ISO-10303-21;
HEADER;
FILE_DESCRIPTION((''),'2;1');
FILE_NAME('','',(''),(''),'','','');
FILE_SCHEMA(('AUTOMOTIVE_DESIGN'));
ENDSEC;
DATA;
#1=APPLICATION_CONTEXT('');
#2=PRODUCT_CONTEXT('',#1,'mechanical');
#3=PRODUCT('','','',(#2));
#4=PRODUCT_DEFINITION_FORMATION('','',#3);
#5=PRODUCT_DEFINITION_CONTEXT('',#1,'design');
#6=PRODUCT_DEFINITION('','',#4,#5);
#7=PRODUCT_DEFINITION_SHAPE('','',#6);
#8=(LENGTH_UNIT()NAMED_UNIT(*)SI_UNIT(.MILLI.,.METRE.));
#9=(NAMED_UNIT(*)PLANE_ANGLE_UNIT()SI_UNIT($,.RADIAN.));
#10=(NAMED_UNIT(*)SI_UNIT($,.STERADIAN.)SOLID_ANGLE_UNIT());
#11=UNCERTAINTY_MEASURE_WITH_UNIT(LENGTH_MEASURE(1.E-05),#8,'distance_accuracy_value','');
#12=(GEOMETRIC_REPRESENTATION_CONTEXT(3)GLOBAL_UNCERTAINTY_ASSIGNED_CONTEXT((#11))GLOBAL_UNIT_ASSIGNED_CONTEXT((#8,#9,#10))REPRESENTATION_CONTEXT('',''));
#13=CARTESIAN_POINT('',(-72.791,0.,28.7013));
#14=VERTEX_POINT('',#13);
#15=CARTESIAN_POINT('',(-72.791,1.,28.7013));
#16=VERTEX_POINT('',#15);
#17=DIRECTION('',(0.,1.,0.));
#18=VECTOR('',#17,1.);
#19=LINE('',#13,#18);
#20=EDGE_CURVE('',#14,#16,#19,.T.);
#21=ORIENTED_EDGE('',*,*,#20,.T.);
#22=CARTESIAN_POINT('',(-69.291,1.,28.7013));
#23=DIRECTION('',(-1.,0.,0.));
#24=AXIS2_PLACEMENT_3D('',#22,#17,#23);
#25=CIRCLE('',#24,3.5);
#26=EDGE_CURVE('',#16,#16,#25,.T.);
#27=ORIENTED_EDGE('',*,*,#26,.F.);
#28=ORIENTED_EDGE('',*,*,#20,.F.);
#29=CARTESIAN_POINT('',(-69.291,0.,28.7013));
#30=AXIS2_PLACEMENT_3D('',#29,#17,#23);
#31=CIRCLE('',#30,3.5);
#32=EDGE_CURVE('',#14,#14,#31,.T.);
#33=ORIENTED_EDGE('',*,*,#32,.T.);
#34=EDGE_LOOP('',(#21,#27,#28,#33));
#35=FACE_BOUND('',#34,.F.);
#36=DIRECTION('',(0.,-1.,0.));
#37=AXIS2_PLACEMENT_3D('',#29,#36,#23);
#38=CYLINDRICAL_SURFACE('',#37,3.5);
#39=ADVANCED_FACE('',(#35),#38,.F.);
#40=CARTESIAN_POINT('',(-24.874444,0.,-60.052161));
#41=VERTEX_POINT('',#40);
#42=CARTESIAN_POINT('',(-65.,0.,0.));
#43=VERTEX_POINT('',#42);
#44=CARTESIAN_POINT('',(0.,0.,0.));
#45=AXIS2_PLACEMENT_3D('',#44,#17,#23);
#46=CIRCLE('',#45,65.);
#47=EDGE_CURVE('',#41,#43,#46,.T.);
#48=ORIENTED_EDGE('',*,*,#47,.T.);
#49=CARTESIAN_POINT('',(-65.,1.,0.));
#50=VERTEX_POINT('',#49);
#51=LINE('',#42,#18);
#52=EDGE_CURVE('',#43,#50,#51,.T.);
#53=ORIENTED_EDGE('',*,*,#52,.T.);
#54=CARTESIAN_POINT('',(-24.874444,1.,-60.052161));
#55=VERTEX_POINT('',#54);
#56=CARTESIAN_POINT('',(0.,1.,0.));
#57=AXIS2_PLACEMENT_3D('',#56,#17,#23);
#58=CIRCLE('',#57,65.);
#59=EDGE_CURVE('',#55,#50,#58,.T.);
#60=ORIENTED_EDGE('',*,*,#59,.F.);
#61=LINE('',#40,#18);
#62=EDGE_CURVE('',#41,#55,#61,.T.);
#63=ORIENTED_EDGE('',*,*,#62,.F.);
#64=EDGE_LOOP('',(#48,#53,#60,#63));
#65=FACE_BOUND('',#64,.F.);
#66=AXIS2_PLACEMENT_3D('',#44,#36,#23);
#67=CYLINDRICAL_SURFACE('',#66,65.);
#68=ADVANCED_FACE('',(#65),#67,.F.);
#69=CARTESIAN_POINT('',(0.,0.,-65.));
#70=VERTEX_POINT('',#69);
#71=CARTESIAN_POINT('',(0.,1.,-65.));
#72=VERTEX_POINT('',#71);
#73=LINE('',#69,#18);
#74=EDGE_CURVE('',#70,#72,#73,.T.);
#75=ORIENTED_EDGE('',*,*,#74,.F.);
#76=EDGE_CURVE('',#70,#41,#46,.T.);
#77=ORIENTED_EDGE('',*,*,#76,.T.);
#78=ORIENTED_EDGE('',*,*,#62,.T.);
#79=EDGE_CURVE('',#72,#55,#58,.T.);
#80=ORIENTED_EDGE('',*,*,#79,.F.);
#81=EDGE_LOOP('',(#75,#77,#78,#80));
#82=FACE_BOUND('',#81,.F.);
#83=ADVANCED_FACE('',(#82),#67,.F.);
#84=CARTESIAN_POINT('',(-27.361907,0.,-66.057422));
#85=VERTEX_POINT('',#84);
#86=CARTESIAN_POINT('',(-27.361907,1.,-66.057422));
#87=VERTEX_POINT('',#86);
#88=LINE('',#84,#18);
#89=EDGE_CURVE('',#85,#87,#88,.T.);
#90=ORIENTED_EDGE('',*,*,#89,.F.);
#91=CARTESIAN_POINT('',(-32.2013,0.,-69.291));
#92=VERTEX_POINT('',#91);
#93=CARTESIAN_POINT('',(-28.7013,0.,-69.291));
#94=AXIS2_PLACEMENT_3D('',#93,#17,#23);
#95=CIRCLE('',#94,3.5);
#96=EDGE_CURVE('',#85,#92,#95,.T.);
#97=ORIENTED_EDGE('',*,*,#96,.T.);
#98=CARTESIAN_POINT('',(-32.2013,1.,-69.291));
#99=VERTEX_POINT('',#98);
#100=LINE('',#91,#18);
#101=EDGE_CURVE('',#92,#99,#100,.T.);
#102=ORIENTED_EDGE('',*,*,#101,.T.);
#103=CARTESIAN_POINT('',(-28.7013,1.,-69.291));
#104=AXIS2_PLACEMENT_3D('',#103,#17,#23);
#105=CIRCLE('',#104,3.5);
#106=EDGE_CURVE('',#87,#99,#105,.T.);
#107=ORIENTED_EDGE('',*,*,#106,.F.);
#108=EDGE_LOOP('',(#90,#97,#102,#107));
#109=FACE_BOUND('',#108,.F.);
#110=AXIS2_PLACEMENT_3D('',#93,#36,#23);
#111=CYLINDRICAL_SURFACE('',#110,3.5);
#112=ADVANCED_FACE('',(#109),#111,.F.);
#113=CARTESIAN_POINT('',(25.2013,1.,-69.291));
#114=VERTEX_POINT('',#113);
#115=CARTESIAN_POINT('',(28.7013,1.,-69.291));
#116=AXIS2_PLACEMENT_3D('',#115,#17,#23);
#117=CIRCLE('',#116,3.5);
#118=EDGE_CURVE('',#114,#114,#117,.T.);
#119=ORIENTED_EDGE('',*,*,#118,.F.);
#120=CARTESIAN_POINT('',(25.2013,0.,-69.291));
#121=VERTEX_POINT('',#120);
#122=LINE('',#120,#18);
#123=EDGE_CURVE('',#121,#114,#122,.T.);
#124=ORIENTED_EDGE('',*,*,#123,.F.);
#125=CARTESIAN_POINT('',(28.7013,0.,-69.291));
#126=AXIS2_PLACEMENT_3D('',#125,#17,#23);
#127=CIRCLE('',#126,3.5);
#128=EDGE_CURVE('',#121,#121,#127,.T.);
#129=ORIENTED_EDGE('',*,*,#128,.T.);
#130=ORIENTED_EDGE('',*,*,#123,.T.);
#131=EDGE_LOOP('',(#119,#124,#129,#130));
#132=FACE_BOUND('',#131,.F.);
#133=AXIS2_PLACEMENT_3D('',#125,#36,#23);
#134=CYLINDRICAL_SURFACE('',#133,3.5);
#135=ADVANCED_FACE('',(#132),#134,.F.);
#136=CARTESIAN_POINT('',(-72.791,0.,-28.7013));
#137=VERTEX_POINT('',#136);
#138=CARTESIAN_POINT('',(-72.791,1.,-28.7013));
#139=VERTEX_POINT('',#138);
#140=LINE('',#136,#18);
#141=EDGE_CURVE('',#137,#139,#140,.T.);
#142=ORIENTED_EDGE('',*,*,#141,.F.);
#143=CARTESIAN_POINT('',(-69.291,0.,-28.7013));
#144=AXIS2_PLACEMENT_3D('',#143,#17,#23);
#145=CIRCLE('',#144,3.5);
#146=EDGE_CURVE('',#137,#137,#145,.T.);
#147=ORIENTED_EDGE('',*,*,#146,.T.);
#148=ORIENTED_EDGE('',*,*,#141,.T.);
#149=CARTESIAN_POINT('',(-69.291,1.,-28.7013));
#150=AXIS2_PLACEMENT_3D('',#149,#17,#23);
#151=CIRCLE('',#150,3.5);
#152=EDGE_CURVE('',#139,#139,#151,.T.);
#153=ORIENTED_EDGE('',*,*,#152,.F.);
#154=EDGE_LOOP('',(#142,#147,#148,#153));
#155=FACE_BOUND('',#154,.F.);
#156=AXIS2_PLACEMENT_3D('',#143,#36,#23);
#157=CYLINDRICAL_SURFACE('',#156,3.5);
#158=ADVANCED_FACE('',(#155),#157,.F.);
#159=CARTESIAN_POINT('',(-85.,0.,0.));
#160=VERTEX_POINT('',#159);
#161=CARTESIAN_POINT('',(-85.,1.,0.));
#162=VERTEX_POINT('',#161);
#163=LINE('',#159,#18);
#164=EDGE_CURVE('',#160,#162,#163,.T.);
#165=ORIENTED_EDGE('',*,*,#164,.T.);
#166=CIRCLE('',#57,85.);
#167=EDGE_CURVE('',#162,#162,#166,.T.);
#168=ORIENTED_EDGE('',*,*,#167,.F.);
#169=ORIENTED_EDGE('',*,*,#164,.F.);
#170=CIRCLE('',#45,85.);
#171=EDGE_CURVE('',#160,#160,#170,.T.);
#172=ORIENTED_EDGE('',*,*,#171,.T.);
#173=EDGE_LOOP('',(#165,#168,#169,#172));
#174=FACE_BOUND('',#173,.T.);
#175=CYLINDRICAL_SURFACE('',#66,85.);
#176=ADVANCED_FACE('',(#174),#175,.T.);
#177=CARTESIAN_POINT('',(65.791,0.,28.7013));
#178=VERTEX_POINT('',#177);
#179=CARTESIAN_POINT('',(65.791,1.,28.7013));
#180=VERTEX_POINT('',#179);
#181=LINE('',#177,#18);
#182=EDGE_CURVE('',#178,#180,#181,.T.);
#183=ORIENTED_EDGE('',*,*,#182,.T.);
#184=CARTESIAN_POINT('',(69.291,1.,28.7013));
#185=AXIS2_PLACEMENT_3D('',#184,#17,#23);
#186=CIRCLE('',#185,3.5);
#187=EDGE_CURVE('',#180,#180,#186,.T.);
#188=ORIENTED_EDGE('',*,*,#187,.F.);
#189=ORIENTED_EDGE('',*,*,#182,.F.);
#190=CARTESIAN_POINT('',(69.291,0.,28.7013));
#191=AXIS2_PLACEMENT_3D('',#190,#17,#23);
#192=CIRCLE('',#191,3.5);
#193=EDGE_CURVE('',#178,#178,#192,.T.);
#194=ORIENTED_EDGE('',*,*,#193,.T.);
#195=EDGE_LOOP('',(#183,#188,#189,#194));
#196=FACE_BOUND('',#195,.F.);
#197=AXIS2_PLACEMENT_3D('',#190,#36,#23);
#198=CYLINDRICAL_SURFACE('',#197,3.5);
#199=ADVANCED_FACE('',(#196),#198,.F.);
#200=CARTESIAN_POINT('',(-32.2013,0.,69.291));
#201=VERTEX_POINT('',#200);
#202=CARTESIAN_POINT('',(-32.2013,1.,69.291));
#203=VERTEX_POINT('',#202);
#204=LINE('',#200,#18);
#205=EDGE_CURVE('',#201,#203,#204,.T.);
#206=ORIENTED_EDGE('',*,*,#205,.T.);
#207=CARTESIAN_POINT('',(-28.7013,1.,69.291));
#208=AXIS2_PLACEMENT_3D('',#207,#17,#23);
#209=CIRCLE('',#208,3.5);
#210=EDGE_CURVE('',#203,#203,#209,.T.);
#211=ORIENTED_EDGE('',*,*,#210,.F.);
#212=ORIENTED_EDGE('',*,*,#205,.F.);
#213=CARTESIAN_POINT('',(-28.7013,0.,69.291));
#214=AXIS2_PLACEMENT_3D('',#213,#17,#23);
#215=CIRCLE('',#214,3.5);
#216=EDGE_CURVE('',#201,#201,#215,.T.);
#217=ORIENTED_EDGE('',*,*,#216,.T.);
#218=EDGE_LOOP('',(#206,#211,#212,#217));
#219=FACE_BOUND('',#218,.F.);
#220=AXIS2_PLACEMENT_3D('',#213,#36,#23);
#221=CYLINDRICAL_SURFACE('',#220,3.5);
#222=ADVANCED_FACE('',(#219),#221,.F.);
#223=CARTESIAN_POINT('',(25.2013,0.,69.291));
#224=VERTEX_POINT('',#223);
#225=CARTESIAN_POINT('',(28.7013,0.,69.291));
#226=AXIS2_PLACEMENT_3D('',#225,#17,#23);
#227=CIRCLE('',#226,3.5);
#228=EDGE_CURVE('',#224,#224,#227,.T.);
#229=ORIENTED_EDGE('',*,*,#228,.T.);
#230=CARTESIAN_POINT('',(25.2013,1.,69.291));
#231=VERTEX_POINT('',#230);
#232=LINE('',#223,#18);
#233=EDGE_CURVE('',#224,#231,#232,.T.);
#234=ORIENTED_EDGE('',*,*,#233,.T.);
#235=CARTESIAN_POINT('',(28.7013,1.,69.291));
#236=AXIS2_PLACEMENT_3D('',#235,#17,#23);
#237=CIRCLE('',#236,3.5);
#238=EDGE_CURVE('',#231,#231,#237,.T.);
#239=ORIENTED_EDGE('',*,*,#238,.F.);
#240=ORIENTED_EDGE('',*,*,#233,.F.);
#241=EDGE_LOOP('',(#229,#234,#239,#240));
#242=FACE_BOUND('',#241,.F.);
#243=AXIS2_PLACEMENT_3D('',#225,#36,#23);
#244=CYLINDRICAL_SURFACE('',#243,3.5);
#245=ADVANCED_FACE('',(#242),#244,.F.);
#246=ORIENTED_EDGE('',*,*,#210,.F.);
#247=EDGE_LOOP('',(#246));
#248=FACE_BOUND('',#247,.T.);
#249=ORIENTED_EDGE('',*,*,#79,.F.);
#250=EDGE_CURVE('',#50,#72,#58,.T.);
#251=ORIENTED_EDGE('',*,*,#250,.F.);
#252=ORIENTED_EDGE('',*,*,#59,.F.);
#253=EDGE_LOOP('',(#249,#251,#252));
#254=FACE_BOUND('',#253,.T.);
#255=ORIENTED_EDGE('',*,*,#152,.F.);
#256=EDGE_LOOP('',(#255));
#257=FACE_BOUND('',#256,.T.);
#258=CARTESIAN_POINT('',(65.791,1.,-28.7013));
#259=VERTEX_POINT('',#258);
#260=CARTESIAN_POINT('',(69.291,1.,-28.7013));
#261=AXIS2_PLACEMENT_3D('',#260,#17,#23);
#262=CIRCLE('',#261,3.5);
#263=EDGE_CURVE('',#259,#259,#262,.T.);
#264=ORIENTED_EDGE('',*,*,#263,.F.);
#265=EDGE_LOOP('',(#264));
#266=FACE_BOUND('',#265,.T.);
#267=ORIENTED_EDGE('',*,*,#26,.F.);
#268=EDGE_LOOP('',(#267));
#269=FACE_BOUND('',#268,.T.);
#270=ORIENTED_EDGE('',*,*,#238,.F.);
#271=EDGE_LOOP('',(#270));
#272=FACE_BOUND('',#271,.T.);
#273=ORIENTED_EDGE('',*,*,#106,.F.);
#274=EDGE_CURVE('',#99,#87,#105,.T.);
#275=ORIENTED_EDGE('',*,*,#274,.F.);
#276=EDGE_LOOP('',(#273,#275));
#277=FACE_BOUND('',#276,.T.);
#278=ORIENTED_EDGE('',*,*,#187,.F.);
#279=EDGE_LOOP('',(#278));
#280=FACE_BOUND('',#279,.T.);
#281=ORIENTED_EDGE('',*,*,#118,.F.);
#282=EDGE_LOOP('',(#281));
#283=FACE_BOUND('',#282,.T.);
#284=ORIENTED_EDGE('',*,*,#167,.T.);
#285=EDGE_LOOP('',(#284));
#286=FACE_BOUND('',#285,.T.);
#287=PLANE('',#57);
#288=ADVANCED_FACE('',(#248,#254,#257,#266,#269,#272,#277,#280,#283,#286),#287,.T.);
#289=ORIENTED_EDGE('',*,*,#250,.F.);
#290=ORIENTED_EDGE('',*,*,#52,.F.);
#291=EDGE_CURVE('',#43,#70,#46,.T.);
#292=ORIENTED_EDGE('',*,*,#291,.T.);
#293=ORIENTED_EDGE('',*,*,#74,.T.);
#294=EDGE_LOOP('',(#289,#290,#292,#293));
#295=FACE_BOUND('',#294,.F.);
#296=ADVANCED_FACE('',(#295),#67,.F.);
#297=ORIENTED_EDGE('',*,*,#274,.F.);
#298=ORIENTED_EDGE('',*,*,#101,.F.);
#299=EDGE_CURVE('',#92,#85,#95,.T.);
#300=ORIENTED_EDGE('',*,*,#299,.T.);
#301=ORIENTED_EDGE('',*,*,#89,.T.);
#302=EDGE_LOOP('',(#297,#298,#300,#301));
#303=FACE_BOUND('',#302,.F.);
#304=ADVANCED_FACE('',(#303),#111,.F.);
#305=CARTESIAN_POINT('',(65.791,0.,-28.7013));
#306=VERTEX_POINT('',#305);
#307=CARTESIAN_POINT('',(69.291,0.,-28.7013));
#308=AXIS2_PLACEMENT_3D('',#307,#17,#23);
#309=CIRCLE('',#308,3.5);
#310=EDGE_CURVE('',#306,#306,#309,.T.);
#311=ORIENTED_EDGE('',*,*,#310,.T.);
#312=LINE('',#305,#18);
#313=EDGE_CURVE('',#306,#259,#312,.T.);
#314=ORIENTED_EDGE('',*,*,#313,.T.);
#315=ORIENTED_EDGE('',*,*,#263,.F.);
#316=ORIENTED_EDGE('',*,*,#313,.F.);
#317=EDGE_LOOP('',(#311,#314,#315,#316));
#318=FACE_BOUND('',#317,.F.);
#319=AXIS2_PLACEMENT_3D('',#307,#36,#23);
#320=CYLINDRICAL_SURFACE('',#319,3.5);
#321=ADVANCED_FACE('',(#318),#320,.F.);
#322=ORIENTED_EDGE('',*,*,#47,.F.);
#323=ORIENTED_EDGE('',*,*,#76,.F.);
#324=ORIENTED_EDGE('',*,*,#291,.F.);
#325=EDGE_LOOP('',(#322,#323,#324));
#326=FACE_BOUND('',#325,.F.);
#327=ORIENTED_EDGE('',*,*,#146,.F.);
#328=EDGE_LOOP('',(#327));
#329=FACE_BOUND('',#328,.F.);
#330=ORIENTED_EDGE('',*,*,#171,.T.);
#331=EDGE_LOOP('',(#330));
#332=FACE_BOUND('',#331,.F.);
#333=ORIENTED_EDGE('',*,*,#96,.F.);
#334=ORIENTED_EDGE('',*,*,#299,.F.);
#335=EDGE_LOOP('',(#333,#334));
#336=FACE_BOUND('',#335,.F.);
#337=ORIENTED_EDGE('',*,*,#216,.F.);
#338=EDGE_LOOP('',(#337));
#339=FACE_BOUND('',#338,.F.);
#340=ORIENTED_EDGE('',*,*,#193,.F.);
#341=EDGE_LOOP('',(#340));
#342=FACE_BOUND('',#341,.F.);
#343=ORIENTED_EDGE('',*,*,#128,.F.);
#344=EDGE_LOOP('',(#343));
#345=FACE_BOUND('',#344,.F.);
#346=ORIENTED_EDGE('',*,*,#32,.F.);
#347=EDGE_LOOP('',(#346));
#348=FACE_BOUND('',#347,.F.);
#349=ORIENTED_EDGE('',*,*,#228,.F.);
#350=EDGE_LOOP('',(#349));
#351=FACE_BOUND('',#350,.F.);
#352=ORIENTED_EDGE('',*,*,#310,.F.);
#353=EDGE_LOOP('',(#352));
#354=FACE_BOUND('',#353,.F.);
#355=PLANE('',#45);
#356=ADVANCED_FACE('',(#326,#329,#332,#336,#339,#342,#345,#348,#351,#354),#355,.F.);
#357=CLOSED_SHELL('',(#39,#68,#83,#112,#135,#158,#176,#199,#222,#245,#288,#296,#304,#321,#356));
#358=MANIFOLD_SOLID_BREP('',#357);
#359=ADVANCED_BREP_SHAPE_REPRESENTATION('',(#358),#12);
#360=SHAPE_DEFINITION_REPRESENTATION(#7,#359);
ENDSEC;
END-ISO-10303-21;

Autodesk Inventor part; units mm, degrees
ref_plane "YZ Plane" through (0, 0, 0) normal (1, 0, 0) x (0, 1, 0)
ref_plane "XZ Plane" through (0, 0, 0) normal (0, 1, 0) x (-1, 0, 0)
ref_plane "XY Plane" through (0, 0, 0) normal (0, 0, 1) x (1, 0, 0)
sketch "Sketch1" plane through (0, 0, 0) normal (0, 1, 0) x (-1, 0, 0)
  circle A0 centre (0, 0) radius 65
  circle A1 centre (0, 0) radius 85
  line L0 (0, 0) -> (28.7013, -69.291)
  line L1 (0, 0) -> (0, -65)
  circle A2 centre (28.7013, -69.291) radius 3.5
  circle A3 centre (69.291, -28.7013) radius 3.5
  circle A4 centre (69.291, 28.7013) radius 3.5
  circle A5 centre (28.7013, 69.291) radius 3.5
  circle A6 centre (-28.7013, 69.291) radius 3.5
  circle A7 centre (-69.291, 28.7013) radius 3.5
  circle A8 centre (-69.291, -28.7013) radius 3.5
  circle A9 centre (-28.7013, -69.291) radius 3.5
  dimension "d0" = 130
  dimension "d1" = 170
  dimension "d2" = 22.5
  dimension "d3" = 75
  dimension "d4" = 7
  dimension "d7" = 360
extrude "Extrusion1" add sketch "Sketch1" along normal blind 1
equation "\"d3\" = 0.25 * d0 + 0.25 * d1"
properties part number "Velcro connection"
